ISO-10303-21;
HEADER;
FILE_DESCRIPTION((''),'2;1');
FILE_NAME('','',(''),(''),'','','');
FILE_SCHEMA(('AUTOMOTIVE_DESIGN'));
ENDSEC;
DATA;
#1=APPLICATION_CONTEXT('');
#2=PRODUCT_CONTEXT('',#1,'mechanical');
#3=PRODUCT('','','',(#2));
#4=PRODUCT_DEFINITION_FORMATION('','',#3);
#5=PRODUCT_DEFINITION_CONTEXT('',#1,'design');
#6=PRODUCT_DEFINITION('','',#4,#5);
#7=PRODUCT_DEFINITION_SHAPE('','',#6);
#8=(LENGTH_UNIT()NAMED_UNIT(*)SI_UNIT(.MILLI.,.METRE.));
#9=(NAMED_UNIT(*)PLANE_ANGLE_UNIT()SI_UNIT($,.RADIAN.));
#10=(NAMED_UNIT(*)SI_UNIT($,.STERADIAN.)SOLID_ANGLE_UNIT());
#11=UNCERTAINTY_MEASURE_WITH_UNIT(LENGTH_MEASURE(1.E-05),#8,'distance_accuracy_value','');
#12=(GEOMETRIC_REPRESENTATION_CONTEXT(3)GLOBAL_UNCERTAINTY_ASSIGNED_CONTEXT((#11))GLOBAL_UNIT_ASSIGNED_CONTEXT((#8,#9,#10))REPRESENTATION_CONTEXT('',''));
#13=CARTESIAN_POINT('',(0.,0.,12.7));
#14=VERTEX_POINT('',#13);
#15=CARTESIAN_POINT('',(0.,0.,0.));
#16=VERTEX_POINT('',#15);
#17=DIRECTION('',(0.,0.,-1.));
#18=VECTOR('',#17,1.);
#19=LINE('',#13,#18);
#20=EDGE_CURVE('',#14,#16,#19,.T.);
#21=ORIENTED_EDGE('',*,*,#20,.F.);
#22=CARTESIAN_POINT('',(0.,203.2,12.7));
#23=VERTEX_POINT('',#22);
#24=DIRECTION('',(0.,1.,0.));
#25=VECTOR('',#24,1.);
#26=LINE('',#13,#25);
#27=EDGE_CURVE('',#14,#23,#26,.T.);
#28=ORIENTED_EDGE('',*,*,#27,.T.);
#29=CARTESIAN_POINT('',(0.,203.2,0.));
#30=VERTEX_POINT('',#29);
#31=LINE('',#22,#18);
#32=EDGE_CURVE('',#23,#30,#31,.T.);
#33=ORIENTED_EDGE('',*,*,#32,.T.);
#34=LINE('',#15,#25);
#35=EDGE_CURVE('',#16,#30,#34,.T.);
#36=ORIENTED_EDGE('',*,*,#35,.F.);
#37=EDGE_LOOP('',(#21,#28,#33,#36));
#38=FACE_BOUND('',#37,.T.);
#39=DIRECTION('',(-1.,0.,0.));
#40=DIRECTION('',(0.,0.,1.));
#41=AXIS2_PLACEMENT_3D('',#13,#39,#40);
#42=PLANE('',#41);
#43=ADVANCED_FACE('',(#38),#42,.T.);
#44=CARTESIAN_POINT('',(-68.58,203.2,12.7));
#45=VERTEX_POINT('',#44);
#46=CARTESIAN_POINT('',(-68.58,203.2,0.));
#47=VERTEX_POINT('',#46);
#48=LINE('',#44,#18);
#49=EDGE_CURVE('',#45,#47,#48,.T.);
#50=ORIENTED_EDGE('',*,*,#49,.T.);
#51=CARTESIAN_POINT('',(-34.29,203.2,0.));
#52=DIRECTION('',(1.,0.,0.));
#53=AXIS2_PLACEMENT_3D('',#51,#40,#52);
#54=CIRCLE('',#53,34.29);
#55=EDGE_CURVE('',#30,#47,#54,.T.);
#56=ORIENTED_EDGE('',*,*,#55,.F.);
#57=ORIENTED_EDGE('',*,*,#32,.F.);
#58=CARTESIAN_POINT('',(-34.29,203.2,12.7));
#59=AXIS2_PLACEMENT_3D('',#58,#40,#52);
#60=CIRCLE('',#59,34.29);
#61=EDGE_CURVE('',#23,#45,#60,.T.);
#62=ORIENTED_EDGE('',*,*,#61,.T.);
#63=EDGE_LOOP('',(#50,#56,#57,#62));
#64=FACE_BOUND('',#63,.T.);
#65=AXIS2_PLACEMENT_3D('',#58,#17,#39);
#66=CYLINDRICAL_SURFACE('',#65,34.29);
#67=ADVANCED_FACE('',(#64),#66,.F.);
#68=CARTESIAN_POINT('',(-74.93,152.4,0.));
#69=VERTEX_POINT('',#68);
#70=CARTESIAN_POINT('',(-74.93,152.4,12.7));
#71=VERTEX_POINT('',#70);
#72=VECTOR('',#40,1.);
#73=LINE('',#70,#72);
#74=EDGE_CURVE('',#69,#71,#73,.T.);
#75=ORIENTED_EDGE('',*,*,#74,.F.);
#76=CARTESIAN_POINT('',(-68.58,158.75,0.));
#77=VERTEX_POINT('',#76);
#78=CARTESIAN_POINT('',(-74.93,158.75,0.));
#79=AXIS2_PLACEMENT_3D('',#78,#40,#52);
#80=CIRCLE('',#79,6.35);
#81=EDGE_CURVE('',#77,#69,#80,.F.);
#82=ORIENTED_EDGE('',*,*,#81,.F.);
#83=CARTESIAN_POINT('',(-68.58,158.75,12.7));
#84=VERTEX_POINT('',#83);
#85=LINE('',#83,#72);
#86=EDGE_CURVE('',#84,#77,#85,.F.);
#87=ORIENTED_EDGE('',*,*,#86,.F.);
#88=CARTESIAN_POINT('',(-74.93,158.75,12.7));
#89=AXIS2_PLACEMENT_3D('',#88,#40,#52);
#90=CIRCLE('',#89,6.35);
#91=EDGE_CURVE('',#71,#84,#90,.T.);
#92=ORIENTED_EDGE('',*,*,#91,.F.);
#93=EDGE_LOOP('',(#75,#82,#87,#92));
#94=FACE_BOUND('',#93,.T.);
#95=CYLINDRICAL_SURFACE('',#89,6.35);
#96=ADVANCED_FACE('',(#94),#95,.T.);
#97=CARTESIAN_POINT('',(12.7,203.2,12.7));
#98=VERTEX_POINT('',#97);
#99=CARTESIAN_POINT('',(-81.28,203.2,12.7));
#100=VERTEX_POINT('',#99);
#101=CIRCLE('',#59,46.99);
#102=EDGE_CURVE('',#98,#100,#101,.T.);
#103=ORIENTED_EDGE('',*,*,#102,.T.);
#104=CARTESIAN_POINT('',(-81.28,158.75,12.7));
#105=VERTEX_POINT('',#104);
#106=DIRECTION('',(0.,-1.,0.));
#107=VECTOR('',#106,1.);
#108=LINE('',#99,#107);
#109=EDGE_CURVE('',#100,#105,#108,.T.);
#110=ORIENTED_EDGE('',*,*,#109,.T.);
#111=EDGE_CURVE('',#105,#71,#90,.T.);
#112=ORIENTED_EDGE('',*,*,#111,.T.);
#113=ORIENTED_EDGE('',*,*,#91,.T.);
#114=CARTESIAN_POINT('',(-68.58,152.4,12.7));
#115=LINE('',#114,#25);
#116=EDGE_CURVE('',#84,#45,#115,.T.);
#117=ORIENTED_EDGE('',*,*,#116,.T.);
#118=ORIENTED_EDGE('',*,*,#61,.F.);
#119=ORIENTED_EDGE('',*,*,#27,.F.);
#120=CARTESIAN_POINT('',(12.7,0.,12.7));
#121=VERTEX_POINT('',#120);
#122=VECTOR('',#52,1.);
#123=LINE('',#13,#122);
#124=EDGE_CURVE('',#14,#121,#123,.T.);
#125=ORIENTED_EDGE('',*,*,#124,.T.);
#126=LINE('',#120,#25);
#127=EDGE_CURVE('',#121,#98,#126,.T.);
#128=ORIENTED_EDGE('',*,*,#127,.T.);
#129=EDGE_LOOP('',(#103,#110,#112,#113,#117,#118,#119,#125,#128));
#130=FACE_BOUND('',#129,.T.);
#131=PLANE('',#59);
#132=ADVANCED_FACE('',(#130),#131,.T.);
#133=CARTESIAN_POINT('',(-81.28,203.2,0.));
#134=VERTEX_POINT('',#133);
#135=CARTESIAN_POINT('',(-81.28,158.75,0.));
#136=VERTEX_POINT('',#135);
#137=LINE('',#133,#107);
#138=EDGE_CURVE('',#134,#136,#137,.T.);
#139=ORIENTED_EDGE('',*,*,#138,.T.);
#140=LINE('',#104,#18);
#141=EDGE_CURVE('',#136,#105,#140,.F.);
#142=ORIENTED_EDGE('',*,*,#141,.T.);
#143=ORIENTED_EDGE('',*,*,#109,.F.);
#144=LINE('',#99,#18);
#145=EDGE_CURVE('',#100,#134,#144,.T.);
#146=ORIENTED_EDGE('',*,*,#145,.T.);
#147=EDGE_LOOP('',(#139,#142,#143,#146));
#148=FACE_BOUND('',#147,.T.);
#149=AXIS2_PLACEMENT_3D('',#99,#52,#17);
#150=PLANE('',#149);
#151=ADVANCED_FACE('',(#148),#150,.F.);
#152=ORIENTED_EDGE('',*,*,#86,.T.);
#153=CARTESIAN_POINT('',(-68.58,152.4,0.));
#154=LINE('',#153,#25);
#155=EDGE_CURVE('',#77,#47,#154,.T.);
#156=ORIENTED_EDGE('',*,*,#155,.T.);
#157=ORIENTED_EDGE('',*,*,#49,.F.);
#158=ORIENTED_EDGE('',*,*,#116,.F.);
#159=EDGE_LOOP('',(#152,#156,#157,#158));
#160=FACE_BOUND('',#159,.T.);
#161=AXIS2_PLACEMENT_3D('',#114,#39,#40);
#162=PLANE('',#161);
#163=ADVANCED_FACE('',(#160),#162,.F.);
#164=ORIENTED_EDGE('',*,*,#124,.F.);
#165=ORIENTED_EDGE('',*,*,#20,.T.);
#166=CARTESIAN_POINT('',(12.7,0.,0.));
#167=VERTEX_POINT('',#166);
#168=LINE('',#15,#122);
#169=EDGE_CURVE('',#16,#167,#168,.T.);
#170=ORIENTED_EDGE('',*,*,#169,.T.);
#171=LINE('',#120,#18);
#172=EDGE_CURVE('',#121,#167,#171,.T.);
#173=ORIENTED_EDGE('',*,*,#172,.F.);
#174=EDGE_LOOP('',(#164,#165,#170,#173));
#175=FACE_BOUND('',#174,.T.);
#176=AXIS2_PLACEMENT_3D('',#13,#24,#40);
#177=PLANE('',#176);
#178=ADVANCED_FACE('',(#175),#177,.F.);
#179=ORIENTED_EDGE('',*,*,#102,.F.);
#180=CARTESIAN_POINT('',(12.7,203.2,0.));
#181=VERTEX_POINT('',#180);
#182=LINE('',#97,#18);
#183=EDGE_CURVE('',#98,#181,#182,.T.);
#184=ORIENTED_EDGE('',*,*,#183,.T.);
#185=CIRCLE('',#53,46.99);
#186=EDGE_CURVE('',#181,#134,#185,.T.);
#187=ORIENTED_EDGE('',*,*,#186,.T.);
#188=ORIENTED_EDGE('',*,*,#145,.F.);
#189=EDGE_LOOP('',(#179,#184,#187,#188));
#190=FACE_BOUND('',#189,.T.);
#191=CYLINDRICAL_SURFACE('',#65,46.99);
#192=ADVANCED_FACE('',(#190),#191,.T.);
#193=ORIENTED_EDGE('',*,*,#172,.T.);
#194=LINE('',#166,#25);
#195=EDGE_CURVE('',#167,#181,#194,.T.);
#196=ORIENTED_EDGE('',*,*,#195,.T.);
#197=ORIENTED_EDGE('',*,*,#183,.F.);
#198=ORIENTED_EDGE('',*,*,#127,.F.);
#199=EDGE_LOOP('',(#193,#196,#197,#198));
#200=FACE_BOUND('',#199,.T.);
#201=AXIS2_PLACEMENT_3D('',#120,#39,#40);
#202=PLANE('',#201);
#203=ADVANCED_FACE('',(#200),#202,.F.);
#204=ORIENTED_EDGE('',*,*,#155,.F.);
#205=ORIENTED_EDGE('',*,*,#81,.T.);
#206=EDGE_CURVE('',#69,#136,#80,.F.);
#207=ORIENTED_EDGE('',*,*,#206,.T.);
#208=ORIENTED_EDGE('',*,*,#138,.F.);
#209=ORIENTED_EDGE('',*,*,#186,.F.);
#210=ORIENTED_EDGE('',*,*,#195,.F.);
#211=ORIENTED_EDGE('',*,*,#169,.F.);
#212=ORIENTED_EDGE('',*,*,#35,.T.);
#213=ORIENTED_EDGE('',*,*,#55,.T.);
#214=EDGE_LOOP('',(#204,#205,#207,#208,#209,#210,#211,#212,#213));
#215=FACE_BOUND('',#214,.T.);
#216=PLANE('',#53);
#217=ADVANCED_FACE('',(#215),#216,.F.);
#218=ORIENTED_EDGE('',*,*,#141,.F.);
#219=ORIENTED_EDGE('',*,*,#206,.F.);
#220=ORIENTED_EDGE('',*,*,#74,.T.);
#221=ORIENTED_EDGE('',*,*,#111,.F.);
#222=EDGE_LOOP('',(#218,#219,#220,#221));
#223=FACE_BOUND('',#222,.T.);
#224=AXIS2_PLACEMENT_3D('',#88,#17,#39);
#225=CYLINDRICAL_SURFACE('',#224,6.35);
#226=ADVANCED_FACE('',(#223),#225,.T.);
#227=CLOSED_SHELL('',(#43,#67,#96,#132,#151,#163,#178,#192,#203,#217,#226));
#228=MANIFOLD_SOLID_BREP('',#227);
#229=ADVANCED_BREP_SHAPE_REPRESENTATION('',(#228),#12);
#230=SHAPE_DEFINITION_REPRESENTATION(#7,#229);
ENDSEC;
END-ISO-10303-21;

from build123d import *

# Parameters (mm, degrees)
BOSS_EXTRUDE1_DEPTH = 12.7
FILLET3_R           = 6.35
FILLET4_R           = 6.35


with BuildPart() as part:
    # Sketch5 → Boss-Extrude1 (new body)
    with BuildSketch(Plane.XY):
        with BuildLine():
            Line((0, 0), (12.7, 0))
            Line((12.7, 0), (12.7, 203.2))
            ThreePointArc((12.7, 203.2), (-34.29, 250.19), (-81.28, 203.2))
            Line((-81.28, 203.2), (-81.28, 152.4))
            Line((-81.28, 152.4), (-68.58, 152.4))
            Line((-68.58, 152.4), (-68.58, 203.2))
            ThreePointArc((-68.58, 203.2), (-34.29, 237.49), (0, 203.2))
            Line((0, 203.2), (0, 0))
        make_face()
    extrude(amount=BOSS_EXTRUDE1_DEPTH)

    # Fillet3
    fillet3_edges = [part.edges().sort_by_distance(p)[0] for p in [
        (-68.58, 152.4, 6.35),
    ]]
    fillet(fillet3_edges, radius=FILLET3_R)

    # Fillet4
    fillet4_edges = [part.edges().sort_by_distance(p)[0] for p in [
        (-81.28, 152.4, 6.35),
    ]]
    fillet(fillet4_edges, radius=FILLET4_R - 0.0001)  # a hair under: the kernel refuses the full size


solid = part.part
